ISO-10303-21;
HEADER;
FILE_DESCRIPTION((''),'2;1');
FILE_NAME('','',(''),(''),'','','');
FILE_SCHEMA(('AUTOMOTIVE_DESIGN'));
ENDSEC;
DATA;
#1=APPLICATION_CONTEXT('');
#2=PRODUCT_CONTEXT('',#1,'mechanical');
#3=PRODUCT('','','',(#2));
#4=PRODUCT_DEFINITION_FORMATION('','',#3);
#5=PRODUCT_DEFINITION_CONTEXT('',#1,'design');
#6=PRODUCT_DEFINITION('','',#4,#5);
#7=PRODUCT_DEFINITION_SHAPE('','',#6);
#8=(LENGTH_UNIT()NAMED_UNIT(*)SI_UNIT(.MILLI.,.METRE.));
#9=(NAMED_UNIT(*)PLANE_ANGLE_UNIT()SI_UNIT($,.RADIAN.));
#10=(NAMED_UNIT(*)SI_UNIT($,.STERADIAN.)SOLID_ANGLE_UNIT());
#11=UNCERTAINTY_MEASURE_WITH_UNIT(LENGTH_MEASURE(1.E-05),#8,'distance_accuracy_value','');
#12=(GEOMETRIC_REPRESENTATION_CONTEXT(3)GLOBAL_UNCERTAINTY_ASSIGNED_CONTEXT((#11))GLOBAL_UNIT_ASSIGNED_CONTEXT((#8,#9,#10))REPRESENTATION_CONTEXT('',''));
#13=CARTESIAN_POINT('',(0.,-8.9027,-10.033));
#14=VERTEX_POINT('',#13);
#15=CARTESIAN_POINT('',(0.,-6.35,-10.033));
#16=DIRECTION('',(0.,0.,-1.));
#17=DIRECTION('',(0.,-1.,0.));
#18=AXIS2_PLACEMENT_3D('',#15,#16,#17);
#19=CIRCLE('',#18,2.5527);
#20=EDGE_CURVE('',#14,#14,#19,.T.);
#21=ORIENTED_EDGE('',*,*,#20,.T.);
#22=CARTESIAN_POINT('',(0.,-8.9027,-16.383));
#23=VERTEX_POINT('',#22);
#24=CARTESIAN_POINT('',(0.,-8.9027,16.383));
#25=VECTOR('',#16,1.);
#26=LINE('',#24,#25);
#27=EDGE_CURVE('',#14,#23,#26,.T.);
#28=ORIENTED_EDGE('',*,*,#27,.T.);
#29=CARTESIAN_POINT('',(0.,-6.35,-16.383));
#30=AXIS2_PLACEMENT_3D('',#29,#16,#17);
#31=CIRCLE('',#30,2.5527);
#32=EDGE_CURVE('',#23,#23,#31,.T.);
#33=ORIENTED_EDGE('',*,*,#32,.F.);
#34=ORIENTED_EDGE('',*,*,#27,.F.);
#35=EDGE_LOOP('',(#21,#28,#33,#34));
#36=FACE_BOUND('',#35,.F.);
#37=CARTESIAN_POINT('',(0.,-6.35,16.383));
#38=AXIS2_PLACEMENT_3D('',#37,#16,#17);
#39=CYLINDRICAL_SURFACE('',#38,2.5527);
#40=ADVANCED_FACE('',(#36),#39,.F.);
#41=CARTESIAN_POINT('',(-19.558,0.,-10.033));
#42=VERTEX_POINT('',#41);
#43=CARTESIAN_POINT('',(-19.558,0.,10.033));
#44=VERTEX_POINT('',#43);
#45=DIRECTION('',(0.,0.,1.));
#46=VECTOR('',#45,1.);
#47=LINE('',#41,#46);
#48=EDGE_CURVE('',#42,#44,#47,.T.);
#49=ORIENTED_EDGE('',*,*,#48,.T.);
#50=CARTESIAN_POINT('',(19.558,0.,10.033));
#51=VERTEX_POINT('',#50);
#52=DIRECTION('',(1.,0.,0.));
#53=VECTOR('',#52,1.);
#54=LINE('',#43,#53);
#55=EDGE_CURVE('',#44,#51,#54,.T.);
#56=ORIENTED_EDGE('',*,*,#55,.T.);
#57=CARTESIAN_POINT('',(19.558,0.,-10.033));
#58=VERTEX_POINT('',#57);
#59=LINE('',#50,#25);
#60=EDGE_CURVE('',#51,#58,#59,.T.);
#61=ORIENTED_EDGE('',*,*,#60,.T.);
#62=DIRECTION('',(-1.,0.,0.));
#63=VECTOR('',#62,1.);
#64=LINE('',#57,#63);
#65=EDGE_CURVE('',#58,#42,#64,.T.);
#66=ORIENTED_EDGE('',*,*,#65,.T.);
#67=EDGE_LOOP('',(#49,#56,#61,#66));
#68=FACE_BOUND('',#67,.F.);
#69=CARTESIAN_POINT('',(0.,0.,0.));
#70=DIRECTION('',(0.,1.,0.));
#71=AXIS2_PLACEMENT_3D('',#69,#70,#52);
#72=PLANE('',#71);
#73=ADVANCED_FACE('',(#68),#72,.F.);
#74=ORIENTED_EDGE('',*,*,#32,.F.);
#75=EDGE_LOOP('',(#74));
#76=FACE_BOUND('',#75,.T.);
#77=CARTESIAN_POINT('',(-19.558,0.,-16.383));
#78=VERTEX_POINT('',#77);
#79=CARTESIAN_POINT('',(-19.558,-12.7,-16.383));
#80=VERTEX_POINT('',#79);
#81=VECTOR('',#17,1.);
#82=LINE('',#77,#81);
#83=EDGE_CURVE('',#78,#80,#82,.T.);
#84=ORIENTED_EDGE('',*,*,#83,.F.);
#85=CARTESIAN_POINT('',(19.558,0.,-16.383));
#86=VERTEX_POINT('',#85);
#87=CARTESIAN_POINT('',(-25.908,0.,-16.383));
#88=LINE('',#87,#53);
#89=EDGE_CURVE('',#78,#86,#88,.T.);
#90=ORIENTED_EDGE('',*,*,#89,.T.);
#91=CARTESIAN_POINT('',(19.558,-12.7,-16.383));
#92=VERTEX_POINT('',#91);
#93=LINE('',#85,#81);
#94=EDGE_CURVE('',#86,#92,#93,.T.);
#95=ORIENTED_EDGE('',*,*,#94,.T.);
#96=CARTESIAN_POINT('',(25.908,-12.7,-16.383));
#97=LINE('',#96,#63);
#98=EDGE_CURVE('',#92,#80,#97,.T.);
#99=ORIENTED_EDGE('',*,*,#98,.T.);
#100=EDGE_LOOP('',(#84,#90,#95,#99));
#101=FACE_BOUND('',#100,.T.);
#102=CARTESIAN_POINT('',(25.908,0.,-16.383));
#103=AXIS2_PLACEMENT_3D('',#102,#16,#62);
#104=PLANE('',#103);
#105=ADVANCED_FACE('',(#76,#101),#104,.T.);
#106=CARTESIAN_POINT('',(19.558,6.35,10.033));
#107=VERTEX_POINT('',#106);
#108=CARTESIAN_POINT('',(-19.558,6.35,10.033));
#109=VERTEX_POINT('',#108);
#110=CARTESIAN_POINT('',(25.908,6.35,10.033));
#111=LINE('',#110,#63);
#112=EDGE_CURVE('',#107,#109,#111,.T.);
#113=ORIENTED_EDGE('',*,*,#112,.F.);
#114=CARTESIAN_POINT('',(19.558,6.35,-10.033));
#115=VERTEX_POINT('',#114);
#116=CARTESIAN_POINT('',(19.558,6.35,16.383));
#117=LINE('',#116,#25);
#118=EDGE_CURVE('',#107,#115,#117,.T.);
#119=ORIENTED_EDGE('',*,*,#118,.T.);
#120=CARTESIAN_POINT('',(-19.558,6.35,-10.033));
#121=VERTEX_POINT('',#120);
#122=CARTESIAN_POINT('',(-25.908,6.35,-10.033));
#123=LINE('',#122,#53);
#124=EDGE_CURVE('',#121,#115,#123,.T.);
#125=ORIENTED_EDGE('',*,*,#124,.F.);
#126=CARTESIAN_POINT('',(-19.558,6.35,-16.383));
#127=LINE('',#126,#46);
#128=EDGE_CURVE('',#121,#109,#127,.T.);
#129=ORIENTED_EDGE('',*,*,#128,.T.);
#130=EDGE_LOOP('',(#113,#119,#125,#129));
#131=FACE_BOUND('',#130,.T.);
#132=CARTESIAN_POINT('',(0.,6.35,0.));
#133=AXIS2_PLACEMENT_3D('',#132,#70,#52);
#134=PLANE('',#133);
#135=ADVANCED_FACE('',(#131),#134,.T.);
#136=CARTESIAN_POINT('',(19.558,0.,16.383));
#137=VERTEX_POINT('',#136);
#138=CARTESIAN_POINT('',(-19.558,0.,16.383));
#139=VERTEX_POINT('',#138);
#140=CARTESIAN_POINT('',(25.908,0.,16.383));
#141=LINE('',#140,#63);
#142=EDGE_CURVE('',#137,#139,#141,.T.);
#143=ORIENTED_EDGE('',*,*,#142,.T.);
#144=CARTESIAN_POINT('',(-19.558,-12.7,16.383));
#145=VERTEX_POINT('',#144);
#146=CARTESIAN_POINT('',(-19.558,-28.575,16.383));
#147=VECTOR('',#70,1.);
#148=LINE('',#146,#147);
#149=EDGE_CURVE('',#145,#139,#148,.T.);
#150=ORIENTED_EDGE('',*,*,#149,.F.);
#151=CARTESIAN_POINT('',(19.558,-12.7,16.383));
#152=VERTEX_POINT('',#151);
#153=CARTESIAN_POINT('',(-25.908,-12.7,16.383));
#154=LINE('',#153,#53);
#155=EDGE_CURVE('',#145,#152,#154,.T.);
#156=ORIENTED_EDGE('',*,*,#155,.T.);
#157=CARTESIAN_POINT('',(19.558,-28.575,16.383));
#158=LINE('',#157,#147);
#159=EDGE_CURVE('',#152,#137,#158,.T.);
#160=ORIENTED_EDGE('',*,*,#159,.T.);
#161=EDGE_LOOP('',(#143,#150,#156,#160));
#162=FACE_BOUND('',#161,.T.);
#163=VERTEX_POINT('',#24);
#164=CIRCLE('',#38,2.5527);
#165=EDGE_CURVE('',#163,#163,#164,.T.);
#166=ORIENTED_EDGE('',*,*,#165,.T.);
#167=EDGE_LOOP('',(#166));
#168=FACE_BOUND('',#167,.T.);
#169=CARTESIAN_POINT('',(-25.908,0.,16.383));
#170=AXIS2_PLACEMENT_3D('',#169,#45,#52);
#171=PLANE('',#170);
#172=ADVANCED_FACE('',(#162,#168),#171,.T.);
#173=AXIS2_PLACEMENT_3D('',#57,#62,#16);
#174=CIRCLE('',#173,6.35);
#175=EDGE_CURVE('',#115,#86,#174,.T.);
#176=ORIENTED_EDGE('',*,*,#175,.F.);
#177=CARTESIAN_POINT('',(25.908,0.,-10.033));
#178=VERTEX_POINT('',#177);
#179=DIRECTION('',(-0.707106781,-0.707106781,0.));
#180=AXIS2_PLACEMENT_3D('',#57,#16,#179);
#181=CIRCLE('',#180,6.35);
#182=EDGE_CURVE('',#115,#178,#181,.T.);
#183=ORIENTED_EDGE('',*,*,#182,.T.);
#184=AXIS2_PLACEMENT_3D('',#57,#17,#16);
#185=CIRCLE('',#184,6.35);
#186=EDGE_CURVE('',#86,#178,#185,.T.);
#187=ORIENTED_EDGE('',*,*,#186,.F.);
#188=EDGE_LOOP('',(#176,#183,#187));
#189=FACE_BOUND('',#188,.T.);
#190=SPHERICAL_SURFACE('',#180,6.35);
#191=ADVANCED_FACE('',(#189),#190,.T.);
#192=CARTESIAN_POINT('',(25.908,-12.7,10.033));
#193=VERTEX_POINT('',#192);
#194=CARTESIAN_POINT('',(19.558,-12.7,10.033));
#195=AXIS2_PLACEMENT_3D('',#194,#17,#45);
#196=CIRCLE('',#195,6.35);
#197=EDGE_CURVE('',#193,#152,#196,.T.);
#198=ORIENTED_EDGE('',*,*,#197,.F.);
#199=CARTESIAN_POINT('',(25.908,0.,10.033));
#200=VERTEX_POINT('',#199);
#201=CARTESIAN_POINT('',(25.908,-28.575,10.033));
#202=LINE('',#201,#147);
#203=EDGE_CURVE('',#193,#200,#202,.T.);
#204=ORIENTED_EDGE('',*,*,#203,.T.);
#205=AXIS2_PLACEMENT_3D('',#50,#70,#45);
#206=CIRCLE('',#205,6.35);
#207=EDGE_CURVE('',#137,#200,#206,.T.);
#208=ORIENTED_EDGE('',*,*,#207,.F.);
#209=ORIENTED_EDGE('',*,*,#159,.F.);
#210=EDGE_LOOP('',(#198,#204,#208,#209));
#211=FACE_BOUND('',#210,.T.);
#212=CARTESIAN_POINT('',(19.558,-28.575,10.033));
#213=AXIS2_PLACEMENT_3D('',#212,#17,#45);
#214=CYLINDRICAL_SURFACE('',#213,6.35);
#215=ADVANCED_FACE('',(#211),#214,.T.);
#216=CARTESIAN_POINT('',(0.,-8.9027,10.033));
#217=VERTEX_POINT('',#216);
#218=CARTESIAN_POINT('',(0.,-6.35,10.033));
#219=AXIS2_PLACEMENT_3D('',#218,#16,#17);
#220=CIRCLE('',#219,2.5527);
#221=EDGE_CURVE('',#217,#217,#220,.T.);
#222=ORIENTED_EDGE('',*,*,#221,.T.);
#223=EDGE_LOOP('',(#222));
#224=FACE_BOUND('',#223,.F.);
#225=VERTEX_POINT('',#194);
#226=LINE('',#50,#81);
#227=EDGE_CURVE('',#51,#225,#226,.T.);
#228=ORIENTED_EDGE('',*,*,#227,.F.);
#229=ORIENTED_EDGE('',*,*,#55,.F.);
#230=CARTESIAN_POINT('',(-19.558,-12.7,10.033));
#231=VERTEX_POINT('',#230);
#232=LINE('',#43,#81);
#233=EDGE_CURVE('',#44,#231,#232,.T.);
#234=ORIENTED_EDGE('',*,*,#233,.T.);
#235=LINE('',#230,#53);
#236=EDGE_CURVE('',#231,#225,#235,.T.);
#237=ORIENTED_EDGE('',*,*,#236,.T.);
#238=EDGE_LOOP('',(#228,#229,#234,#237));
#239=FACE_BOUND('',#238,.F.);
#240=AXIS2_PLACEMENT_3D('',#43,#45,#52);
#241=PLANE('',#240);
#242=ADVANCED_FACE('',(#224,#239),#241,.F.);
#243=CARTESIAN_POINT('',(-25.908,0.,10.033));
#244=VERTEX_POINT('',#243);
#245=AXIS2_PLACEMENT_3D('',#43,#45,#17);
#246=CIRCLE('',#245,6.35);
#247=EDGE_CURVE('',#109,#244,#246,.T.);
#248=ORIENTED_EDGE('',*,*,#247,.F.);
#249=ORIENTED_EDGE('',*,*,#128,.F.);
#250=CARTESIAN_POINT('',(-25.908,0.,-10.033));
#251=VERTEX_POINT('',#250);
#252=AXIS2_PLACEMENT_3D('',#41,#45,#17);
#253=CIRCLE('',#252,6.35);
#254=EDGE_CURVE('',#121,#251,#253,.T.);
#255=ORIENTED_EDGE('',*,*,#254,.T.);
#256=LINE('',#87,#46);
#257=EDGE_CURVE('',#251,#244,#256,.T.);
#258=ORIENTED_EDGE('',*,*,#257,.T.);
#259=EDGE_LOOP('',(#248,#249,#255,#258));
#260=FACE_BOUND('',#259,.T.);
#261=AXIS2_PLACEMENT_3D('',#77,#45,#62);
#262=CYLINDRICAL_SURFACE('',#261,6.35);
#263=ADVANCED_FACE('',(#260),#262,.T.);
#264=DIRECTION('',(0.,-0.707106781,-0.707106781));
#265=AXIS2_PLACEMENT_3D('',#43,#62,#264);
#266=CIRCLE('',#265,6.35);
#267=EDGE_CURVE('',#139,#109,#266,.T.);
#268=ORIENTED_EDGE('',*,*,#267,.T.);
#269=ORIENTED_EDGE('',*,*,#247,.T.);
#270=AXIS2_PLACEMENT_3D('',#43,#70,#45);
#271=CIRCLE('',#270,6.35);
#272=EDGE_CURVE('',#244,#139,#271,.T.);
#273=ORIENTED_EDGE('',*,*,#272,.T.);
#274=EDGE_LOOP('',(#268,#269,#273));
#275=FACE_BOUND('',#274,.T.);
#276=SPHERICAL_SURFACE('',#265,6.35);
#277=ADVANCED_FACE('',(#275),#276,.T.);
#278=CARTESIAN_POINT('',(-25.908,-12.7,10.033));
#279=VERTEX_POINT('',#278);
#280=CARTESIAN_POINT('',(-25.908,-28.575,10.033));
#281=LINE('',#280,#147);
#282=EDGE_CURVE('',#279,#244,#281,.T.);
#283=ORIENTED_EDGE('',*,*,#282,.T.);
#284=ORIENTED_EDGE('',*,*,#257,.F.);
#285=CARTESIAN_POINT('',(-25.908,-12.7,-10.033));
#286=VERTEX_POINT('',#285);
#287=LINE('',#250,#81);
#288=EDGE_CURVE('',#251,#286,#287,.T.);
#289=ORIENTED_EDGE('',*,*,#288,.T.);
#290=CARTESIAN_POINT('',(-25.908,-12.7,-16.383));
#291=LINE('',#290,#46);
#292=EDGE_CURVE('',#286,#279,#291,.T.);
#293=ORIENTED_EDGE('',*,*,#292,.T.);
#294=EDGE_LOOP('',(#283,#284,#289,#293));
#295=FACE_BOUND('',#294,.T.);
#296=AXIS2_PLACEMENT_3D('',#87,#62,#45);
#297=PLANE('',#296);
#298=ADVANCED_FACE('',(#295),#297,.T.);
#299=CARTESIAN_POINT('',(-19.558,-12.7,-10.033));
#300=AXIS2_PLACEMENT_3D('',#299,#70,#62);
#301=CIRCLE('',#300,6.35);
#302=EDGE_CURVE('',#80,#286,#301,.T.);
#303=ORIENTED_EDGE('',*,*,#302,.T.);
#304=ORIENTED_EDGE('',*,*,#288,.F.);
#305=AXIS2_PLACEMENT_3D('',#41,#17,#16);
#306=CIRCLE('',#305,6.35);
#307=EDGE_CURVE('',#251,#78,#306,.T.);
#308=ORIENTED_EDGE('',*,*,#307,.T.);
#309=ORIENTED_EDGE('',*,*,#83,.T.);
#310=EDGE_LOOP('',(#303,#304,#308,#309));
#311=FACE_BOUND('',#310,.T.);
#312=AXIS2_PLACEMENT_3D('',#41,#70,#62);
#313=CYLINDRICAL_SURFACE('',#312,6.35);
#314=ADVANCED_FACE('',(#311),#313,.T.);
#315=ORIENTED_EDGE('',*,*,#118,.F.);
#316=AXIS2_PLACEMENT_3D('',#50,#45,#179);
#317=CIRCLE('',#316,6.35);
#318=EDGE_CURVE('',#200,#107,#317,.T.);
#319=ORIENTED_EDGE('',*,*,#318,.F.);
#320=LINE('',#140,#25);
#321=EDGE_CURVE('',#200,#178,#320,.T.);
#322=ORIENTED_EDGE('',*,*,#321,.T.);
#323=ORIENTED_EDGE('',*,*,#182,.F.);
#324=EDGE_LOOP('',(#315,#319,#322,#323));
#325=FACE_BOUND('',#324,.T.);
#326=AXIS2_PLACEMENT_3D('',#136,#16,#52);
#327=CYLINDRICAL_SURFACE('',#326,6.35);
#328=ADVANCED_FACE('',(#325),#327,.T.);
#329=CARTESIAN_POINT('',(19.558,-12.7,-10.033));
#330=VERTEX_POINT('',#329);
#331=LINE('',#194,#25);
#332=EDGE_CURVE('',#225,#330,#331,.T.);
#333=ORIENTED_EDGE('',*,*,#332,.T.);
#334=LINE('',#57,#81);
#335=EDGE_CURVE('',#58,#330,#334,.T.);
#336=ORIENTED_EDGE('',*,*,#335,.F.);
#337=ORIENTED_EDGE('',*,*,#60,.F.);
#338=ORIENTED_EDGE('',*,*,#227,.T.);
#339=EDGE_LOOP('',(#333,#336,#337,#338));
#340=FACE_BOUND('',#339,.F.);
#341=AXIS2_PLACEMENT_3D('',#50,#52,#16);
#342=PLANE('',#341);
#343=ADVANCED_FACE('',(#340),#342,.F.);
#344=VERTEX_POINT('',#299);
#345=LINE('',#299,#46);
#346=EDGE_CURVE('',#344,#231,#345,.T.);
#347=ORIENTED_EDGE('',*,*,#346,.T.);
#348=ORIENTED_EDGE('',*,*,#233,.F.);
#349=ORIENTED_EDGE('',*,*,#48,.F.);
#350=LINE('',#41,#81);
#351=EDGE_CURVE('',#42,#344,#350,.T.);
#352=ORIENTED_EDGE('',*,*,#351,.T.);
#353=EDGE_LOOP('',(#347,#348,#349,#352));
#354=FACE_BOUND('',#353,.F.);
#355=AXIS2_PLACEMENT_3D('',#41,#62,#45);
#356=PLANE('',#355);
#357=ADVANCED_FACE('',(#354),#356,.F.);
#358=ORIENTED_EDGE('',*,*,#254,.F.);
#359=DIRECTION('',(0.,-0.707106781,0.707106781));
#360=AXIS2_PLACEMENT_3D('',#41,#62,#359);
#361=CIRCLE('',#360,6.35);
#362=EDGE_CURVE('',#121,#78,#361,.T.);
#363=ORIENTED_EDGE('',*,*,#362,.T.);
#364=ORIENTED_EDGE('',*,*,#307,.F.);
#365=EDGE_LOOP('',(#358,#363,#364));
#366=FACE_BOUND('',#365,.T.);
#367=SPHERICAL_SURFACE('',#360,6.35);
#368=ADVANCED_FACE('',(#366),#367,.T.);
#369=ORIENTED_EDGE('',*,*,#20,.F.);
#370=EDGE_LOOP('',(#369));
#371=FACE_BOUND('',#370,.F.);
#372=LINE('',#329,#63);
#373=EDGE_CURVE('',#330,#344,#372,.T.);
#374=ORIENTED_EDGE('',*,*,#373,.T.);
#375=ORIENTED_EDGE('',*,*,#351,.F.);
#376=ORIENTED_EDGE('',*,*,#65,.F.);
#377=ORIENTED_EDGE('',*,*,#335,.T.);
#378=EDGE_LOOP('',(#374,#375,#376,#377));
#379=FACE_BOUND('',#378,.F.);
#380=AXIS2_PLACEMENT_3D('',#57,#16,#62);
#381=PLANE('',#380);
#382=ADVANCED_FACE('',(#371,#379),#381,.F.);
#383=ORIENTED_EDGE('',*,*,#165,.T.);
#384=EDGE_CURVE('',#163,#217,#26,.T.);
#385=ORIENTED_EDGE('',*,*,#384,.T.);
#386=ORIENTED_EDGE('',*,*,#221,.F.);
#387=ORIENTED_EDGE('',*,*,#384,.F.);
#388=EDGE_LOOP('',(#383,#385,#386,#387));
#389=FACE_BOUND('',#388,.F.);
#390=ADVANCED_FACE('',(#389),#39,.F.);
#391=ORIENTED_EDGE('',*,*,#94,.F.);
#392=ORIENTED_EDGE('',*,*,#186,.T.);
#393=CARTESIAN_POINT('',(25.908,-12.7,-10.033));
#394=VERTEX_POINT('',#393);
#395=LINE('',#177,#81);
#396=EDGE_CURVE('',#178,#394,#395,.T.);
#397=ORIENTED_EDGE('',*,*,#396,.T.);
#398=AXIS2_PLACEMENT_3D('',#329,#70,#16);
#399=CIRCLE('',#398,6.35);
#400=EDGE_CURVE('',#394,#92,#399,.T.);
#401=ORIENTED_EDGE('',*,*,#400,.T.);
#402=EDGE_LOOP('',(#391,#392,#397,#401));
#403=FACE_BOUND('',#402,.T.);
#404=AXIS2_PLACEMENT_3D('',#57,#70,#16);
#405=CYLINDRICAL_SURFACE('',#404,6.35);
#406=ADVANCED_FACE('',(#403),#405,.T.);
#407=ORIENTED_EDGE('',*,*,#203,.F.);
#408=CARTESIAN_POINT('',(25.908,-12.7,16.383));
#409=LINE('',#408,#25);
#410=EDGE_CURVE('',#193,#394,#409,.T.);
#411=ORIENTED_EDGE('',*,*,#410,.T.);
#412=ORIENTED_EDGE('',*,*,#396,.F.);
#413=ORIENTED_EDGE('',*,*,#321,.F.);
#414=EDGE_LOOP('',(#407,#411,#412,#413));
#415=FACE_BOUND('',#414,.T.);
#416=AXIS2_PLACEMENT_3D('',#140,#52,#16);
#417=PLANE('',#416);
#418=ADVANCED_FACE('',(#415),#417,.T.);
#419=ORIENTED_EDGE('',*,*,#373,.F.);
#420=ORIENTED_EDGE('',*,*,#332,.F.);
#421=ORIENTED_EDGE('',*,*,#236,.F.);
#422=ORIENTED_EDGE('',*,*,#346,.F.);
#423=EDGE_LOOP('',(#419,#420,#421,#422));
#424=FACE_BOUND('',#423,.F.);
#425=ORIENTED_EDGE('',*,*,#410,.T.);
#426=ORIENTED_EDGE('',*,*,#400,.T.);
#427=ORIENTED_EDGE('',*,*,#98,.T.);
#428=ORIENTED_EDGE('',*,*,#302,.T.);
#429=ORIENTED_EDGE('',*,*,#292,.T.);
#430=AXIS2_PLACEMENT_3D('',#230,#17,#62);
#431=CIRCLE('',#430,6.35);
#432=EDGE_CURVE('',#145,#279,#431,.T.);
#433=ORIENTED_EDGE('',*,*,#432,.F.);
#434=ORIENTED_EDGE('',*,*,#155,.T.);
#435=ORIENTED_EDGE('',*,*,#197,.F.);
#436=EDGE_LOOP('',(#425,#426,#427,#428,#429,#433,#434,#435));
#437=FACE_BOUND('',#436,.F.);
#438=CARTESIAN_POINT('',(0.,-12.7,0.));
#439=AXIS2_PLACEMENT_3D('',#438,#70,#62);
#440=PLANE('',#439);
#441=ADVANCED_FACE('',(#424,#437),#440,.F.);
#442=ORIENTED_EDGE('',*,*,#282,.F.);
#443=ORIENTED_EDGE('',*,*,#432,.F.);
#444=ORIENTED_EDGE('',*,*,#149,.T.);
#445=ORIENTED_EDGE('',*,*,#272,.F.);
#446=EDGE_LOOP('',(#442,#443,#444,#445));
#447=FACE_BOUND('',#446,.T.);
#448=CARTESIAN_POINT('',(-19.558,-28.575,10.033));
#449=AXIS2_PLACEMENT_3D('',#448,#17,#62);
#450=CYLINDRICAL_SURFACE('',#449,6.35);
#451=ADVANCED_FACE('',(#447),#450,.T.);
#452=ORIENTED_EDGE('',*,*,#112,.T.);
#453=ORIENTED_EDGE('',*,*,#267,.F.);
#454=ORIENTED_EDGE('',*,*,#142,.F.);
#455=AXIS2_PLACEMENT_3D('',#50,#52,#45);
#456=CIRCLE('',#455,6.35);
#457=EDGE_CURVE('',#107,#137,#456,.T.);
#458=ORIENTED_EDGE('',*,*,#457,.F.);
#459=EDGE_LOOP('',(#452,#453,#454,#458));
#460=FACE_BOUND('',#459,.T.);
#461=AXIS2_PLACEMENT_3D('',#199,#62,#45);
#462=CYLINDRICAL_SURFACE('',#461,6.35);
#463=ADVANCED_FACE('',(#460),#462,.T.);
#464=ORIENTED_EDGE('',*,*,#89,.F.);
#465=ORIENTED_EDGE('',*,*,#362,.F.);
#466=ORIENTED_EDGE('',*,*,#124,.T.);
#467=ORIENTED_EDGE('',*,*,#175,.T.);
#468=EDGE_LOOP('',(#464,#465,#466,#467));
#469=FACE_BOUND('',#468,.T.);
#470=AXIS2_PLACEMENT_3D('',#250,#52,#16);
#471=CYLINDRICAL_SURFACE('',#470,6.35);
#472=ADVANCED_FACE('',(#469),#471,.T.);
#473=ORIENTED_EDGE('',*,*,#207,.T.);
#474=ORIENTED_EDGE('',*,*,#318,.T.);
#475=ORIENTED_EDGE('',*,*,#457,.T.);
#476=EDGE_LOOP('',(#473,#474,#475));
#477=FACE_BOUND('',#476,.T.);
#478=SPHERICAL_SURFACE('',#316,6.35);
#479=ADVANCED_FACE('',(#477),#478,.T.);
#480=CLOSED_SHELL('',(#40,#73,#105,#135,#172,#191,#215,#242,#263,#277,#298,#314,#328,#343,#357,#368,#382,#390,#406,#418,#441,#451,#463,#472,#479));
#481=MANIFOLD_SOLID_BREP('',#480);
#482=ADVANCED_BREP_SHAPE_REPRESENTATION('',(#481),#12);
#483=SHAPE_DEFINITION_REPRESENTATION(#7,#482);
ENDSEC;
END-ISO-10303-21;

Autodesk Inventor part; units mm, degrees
ref_plane "YZ Plane" through (0, 0, 0) normal (1, 0, 0) x (0, 1, 0)
ref_plane "XZ Plane" through (0, 0, 0) normal (0, 1, 0) x (-1, 0, 0)
ref_plane "XY Plane" through (0, 0, 0) normal (0, 0, 1) x (1, 0, 0)
sketch "Sketch1" plane through (0, 0, 0) normal (0, 1, 0) x (-1, 0, 0)
  line L0 (19.558, 10.033) -> (-19.558, 10.033)
  line L1 (-19.558, 10.033) -> (-19.558, -10.033)
  line L2 (-19.558, -10.033) -> (19.558, -10.033)
  line L3 (19.558, -10.033) -> (19.558, 10.033)
  line L4 (19.558, 10.033) -> (-19.558, -10.033) construction
  line L5 (-19.558, 10.033) -> (19.558, -10.033) construction
  line L6 (25.908, 16.383) -> (-25.908, 16.383)
  line L7 (-25.908, 16.383) -> (-25.908, -16.383)
  line L8 (-25.908, -16.383) -> (25.908, -16.383)
  line L9 (25.908, -16.383) -> (25.908, 16.383)
  line L10 (25.908, 16.383) -> (-25.908, -16.383) construction
  line L11 (-25.908, 16.383) -> (25.908, -16.383) construction
  point P0 (0, 0)
  dimension "d0" = 20.066
  dimension "d1" = 39.116
  dimension "d2" = 6.35
  dimension "d3" = 6.35
extrude "Extrusion1" add sketch "Sketch1" against normal blind 12.7
sketch "Sketch2" plane through (0, 0, 0) normal (0, 1, 0) x (1, 0, 0)
  line L0 (25.908, -16.383) -> (-25.908, -16.383) projected
  line L1 (-25.908, 16.383) -> (25.908, 16.383) projected
  line L2 (-25.908, -16.383) -> (25.908, -16.383)
  line L3 (25.908, -16.383) -> (25.908, 16.383)
  line L4 (25.908, 16.383) -> (-25.908, 16.383)
  line L5 (-25.908, 16.383) -> (-25.908, -16.383)
  point P0 (0, 0)
extrude "Extrusion2" add sketch "Sketch2" along normal blind 6.35
fillet "Fillet1" radius 6.35 4 edges at (0, 6.35, 16.383) (25.908, 6.35, 0) (0, 6.35, -16.383) (-25.908, 6.35, 0)
fillet "Fillet2" radius 6.35 8 edges at (24.0481, 4.4901, 14.5231) (25.908, -6.35, 16.383) (24.0481, 4.4901, -14.5231) (25.908, -6.35, -16.383) (-24.0481, 4.4901, 14.5231) (-25.908, -6.35, 16.383) (-24.0481, 4.4901, -14.5231) (-25.908, -6.35, -16.383)
sketch "Sketch3" plane through (-19.558, -12.7, 16.383) normal (0, 0, 1) x (1, 0, 0)
  line L0 (0, 0) -> (-6.35, 0) construction
  line L1 (45.466, 12.7) -> (39.116, 12.7) construction
  line L2 (0, 0) -> (39.116, 12.7) construction
  line L3 (39.116, 12.7) -> (39.116, 0) construction
  line L4 (0, 19.05) -> (0, 12.7) construction
  line L5 (39.116, 0) -> (0, 12.7) construction
  point P0 (19.558, 12.7)
  point P1 (19.558, 6.35)
hole "Hole1" at (0, -6.35, 16.383) direction (0, 0, -1) diameter 5.1054 end through all clearance for "Hex Machine Screw" size "#10" standard "Ansi Unified Screw Threads"
equation "\"d0\" = width + 2 * printerError"
equation "\"d1\" = length + 2 * printerError"
equation "\"d2\" = wallThickness"
equation "\"d3\" = wallThickness"
equation "\"d4\" = heightFromTop"
equation "\"d6\" = thicknessAboveTopOfPost"
equation "\"width\" = 19.05"
equation "\"length\" = 38.1"
equation "\"heightFromTop\" = 12.7"
equation "\"thicknessAboveTopOfPost\" = 6.35"
equation "\"printerError\" = 0.508"
equation "\"wallThickness\" = 6.35"
properties part number "PostCap"
